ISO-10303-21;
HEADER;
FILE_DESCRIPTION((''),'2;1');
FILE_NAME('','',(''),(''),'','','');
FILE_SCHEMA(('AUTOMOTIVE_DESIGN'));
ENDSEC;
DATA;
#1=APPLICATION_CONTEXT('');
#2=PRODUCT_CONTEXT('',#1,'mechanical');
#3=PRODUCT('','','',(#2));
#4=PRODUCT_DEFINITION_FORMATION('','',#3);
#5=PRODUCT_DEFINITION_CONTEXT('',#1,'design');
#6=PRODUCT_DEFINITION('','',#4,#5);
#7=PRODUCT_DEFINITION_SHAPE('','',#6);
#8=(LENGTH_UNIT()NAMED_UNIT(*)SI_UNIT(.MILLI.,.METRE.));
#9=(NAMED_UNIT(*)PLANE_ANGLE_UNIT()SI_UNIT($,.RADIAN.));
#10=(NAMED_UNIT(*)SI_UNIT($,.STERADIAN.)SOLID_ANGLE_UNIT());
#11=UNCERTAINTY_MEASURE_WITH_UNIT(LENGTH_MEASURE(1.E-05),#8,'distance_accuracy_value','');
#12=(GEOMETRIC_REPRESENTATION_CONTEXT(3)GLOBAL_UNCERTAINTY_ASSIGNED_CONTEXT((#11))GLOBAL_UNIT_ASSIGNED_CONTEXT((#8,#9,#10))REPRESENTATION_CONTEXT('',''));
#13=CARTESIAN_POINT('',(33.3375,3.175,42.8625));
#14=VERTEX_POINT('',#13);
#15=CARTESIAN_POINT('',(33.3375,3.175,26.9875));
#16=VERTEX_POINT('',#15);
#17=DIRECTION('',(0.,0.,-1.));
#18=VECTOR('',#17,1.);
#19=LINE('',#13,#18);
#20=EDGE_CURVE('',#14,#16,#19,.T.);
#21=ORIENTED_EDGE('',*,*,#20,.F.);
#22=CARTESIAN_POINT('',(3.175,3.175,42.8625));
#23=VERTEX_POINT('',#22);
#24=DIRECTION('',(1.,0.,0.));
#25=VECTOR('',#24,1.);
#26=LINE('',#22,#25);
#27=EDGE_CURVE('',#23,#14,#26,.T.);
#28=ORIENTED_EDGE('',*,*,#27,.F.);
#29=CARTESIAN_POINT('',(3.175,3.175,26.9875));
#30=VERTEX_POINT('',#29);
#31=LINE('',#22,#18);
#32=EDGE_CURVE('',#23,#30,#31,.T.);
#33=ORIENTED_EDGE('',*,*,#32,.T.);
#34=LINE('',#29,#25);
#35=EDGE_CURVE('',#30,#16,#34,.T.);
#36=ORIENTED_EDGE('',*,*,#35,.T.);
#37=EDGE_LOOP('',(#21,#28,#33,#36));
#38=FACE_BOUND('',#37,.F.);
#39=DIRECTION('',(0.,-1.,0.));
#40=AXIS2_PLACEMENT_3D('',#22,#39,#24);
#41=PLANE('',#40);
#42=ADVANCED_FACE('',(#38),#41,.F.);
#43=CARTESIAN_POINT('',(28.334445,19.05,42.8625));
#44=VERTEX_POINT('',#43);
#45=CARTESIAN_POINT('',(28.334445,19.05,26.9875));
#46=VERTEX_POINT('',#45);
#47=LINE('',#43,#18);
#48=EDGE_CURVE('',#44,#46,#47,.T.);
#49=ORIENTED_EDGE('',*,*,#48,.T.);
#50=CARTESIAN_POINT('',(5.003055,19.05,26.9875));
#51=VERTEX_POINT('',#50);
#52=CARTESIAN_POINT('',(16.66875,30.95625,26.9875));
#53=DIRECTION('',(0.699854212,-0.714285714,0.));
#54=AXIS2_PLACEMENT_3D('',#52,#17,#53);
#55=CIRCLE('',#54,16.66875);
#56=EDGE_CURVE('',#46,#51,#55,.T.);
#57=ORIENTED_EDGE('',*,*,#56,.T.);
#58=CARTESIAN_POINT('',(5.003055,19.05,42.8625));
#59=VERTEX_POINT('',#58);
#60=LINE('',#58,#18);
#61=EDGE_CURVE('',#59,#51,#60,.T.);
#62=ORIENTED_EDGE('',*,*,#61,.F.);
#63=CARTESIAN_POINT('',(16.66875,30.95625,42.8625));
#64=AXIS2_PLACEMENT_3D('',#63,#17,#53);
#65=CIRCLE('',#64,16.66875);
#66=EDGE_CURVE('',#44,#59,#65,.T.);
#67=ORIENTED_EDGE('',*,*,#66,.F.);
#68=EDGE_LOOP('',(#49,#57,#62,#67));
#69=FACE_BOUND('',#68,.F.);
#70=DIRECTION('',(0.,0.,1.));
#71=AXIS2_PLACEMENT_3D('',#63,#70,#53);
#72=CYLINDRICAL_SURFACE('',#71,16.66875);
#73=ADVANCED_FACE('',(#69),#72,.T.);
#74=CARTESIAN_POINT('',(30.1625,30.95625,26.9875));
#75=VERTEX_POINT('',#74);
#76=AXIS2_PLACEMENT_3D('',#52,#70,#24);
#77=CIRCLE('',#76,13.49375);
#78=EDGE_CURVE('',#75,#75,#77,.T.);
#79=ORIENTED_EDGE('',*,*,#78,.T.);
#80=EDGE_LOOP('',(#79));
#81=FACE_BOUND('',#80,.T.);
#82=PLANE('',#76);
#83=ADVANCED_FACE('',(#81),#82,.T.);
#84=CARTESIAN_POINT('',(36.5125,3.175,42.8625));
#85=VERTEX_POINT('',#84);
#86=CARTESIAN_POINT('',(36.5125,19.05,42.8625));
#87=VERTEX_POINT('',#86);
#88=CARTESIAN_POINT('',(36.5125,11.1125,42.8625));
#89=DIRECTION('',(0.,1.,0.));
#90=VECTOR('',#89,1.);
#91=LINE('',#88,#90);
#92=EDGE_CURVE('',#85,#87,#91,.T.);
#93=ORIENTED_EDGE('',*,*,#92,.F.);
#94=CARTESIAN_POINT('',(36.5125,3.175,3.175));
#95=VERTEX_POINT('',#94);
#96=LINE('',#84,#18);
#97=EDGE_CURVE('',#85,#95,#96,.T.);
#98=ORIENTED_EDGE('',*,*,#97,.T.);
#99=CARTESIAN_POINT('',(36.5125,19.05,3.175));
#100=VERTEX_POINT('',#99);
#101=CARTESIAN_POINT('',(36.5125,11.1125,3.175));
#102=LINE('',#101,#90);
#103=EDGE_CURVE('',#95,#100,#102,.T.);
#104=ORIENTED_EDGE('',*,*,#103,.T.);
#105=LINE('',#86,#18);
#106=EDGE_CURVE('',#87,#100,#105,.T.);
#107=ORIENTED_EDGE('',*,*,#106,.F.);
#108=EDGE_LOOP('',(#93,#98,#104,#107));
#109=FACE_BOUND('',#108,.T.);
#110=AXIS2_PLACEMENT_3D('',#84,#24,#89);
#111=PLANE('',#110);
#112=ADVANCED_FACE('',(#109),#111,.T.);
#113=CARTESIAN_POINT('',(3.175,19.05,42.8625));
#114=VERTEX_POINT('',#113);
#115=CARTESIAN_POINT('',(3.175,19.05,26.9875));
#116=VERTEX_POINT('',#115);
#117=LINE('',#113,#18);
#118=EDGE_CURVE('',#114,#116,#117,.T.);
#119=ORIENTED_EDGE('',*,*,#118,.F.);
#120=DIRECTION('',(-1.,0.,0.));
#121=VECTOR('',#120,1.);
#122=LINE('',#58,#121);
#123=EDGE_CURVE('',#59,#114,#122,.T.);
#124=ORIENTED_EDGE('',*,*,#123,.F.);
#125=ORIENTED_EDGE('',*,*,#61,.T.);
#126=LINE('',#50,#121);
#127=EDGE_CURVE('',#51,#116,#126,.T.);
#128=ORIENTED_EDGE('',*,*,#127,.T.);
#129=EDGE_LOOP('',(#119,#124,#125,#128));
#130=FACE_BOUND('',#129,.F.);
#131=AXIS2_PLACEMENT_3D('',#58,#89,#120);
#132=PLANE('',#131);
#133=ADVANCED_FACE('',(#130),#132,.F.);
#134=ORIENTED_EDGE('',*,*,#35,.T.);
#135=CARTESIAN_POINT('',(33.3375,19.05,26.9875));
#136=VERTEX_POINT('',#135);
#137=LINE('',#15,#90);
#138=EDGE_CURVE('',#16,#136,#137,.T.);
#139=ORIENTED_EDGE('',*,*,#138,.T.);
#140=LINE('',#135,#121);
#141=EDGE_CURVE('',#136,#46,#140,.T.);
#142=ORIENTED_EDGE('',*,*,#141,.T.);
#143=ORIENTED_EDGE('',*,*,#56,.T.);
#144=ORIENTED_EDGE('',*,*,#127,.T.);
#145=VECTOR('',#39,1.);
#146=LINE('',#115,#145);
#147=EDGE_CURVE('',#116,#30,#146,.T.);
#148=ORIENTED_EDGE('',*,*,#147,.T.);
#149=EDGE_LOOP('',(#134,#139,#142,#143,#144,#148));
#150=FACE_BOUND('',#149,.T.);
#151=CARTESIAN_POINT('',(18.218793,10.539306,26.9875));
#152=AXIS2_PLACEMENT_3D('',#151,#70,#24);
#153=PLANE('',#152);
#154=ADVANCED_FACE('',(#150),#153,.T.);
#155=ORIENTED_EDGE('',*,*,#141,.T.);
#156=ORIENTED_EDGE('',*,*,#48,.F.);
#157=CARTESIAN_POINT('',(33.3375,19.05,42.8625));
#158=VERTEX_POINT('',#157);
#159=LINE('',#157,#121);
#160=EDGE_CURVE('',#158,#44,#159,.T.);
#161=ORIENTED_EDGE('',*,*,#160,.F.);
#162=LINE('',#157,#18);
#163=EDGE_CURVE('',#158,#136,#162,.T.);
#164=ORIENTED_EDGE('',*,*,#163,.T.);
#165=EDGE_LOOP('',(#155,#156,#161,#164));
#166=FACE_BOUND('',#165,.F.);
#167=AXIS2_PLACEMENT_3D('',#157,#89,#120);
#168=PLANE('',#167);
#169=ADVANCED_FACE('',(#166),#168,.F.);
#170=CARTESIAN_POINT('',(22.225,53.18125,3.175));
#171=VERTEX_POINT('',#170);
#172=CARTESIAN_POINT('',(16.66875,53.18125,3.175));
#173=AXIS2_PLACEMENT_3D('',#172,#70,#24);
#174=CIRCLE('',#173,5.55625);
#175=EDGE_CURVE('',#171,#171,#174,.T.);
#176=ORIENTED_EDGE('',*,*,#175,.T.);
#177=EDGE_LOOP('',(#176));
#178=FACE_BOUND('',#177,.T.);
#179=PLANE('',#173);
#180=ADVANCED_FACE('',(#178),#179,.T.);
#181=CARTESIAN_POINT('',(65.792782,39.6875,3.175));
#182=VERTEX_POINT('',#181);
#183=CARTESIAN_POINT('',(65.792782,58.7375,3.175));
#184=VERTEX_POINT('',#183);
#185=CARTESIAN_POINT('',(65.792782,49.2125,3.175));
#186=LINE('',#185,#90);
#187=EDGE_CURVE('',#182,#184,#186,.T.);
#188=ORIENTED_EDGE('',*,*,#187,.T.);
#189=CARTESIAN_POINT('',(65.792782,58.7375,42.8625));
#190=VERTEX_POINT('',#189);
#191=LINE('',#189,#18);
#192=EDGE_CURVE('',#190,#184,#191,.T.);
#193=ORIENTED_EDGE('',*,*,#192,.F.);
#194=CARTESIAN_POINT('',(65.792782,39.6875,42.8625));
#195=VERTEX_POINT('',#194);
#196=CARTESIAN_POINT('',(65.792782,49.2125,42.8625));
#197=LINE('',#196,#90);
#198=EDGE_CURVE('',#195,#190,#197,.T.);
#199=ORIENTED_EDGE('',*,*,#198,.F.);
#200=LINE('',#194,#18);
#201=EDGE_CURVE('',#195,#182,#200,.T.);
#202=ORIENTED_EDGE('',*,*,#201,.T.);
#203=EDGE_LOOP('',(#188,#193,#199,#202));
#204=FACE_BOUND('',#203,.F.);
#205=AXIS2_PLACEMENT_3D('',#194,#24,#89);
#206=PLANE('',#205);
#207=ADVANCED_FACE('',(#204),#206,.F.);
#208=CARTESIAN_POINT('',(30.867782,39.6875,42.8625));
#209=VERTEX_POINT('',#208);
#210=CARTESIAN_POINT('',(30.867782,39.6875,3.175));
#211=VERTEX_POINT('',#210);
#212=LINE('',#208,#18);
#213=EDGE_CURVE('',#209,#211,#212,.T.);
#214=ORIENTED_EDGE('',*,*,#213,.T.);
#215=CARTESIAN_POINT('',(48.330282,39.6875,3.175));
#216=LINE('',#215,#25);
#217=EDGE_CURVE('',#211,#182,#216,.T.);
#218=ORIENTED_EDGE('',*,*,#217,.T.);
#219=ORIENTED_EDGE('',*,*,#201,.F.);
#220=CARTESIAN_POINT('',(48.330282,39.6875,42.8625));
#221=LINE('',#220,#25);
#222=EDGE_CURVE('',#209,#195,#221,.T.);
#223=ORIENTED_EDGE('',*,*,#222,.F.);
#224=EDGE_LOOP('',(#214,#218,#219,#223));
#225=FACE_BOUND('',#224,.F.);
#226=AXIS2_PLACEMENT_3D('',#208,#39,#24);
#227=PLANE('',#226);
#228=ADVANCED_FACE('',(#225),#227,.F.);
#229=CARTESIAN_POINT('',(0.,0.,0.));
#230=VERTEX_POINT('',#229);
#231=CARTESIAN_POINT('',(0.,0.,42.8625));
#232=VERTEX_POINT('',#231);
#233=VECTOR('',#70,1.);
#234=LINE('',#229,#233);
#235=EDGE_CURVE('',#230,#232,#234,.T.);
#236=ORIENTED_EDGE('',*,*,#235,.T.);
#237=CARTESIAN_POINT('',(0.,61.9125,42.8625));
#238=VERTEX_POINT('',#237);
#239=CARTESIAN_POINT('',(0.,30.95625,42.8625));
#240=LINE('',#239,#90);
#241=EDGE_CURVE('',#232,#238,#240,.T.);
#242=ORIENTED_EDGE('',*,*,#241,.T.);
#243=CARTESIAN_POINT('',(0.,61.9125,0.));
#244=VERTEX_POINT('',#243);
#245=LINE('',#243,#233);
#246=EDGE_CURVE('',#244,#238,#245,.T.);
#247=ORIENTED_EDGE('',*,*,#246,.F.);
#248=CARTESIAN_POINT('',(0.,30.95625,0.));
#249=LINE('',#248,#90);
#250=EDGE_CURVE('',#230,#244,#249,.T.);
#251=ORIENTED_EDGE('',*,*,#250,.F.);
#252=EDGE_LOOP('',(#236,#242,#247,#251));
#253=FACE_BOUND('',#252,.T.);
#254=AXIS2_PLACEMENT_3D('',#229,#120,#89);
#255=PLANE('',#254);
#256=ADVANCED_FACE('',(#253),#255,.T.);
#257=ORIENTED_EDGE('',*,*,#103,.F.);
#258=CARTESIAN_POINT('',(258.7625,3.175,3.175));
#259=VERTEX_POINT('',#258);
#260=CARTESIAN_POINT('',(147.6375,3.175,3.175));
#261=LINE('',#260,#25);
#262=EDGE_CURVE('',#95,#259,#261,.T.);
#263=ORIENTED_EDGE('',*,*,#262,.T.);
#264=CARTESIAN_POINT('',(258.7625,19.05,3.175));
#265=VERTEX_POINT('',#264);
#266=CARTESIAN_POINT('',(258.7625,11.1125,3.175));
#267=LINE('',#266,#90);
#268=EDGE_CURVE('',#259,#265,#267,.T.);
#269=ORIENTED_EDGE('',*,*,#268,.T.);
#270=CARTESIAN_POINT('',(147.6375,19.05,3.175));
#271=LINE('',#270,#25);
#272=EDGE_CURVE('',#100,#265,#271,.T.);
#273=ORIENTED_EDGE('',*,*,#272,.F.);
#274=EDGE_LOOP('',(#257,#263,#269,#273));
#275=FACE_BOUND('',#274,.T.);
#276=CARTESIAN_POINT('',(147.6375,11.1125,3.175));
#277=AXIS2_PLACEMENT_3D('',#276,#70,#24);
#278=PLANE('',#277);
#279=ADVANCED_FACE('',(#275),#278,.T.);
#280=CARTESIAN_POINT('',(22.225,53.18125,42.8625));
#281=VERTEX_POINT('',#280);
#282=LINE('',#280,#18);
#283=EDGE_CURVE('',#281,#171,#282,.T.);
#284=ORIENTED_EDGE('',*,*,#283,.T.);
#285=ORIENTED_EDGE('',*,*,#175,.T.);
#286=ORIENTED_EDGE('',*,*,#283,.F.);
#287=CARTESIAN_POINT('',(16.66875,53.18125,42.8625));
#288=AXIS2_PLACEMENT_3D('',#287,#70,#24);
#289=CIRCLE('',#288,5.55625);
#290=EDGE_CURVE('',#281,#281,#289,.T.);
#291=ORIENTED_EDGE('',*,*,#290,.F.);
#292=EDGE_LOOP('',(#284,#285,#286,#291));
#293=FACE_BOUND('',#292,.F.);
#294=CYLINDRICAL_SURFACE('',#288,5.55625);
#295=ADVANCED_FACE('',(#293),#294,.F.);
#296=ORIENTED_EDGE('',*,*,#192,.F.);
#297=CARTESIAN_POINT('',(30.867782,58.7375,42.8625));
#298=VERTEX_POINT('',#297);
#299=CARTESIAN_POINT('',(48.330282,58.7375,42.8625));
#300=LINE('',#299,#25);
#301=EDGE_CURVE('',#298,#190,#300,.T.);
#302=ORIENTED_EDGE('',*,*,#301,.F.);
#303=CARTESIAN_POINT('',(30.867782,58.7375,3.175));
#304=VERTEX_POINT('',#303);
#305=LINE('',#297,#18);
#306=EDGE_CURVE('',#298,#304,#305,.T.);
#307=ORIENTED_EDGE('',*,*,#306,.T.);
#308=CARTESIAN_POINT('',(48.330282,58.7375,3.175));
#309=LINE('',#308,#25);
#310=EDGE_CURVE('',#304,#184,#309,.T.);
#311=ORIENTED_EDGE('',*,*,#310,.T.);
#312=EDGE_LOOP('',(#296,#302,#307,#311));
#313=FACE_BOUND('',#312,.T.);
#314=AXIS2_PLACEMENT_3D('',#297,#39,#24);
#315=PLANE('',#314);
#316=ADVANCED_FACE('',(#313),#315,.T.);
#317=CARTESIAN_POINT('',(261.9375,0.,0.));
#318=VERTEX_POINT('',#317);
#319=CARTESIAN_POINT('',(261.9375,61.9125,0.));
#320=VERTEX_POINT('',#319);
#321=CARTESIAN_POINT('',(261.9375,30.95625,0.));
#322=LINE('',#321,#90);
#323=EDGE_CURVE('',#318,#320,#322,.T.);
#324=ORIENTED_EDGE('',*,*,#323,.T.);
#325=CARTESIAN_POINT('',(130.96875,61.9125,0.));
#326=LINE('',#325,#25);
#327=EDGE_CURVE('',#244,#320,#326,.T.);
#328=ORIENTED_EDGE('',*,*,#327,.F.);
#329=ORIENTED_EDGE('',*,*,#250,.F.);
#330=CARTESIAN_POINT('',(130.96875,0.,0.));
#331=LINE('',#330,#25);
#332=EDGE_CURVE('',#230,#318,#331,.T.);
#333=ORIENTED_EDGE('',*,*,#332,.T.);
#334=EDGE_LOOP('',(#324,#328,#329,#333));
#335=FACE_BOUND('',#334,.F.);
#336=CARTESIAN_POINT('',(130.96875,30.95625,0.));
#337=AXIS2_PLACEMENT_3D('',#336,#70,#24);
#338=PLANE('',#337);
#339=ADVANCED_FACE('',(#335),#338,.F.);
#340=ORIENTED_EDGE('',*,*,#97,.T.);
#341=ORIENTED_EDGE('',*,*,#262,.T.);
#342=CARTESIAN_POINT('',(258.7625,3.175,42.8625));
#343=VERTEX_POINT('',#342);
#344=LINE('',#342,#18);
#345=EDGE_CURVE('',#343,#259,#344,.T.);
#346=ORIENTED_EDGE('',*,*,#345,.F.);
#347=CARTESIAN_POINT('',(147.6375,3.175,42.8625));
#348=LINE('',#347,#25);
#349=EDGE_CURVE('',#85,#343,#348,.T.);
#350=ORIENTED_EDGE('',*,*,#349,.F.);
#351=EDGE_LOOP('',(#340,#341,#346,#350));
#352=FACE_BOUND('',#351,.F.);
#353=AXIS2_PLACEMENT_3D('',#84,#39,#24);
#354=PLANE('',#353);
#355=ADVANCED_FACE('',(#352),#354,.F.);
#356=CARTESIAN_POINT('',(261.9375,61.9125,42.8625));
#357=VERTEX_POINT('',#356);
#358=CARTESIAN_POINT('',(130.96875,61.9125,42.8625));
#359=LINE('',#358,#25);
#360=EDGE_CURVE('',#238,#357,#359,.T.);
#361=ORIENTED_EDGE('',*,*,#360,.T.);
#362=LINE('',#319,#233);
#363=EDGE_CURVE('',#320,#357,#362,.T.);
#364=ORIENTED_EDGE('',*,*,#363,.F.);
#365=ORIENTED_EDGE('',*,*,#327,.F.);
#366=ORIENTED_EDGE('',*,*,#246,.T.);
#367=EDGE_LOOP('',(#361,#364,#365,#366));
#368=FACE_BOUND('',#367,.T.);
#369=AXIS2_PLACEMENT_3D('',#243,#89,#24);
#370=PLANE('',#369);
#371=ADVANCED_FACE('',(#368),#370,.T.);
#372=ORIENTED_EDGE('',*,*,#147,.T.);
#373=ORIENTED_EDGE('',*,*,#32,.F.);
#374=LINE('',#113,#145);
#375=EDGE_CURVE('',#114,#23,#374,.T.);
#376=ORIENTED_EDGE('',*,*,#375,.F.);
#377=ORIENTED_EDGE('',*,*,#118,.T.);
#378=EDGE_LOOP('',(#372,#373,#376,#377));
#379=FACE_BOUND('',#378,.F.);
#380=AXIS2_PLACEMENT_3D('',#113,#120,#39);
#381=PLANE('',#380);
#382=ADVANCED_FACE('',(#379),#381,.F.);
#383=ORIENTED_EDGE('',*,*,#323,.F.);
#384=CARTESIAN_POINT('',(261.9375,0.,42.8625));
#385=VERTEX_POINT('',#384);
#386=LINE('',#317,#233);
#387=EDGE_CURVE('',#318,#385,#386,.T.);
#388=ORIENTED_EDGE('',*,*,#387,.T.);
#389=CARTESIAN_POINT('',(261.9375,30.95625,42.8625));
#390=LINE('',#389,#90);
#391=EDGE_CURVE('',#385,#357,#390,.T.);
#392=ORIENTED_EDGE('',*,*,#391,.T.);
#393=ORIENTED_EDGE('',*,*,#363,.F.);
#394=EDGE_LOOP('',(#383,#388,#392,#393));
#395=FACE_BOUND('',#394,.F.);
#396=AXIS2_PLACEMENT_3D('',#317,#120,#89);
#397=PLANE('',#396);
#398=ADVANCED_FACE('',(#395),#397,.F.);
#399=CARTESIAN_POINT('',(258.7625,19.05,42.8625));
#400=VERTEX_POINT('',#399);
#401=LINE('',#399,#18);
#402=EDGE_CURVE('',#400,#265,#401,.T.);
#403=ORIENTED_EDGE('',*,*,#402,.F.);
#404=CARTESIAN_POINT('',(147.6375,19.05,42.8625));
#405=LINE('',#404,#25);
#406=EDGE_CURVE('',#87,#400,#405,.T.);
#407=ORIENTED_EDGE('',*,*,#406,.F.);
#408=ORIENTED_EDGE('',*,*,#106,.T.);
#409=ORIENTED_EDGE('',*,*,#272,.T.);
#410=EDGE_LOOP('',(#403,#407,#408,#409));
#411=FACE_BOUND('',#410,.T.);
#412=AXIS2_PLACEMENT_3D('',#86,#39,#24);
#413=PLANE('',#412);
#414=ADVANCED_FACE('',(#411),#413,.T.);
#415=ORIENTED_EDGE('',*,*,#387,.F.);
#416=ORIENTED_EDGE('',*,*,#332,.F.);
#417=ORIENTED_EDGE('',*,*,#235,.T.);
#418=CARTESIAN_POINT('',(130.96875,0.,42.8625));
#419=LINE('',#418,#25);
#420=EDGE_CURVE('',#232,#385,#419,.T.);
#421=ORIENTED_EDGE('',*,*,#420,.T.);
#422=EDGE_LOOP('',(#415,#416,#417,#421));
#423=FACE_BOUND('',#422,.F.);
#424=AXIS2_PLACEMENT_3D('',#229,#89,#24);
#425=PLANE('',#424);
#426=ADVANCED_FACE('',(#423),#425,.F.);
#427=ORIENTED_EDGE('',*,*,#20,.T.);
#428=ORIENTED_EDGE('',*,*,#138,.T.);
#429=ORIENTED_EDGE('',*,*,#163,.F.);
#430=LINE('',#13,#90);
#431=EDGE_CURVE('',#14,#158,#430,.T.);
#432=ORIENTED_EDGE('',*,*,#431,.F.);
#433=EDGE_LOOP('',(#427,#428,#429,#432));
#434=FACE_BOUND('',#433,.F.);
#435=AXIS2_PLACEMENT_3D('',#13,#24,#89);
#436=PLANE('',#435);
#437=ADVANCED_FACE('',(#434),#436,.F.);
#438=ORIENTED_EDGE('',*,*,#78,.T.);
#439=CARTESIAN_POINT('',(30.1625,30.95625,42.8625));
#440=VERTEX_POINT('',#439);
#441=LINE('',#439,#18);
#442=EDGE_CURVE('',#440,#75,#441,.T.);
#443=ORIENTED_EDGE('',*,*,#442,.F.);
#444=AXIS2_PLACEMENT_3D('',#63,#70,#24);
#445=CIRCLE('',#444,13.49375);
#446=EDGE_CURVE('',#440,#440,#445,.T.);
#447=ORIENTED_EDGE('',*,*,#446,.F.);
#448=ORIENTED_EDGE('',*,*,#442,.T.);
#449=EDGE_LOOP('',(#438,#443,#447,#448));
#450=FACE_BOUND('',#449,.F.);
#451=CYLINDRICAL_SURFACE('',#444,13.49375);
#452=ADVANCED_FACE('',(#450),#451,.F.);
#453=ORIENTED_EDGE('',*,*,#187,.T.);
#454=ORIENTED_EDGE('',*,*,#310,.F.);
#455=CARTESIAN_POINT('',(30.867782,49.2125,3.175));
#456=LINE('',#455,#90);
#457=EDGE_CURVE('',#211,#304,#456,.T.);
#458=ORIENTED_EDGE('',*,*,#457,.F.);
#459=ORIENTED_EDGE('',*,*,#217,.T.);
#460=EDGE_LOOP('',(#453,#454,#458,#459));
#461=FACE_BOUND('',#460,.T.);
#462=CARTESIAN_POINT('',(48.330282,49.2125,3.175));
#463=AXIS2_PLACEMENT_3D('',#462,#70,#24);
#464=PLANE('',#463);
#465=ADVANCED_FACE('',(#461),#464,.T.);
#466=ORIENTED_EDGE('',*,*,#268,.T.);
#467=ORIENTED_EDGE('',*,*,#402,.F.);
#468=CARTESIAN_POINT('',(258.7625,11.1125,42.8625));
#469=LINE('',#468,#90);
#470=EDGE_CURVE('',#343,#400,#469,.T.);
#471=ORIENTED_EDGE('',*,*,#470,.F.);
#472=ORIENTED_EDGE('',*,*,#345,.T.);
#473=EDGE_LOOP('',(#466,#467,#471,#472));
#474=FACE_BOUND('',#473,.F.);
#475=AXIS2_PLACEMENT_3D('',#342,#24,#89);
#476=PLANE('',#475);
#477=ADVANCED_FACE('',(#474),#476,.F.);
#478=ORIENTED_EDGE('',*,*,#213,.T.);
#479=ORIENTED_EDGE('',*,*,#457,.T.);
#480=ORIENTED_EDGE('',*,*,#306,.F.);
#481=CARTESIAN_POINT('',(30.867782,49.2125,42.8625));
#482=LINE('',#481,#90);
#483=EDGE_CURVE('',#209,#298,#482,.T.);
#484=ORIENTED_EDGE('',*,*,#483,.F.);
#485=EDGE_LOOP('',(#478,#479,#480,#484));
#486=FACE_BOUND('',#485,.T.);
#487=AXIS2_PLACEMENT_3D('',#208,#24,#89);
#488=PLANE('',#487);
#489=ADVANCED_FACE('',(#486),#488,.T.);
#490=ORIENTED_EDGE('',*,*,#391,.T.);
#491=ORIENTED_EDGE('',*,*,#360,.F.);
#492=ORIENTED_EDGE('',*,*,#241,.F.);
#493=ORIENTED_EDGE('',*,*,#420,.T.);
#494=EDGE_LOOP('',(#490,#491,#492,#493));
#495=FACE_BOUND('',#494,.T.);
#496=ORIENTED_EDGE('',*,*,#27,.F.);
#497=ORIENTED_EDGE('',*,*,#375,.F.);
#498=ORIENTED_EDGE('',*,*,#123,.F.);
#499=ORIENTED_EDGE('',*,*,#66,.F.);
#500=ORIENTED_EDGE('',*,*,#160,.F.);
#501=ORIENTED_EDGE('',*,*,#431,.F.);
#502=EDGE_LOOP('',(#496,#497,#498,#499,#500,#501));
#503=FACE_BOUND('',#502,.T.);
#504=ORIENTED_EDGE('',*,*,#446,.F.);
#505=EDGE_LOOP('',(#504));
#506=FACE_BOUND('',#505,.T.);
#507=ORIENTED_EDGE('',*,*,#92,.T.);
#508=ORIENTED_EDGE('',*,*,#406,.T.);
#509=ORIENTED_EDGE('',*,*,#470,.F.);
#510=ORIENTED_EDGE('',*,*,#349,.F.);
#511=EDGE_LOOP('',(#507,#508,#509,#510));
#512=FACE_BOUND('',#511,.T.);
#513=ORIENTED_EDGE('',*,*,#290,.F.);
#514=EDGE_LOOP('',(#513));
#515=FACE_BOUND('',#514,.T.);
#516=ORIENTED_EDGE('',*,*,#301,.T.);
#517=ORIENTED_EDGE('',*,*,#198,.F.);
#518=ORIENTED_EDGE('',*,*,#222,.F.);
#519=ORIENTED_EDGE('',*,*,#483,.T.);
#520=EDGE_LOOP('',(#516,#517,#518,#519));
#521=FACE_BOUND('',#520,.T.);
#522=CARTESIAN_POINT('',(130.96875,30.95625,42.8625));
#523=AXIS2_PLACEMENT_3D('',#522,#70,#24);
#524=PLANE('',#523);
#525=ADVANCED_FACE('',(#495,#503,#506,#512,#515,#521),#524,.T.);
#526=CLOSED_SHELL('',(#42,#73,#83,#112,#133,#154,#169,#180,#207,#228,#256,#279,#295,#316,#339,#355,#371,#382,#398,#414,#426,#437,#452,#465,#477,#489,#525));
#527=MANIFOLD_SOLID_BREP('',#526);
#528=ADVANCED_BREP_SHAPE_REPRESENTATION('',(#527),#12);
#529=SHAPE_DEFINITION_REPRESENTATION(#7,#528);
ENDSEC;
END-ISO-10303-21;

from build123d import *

# Parameters (mm, degrees)
F0_W     = 261.9375
F0_H     = 61.9125
F1_DEPTH = 42.8625
F2_R     = 5.55625
F2_W     = 34.925
F2_H     = 19.05
F2_W_2   = 222.25
F2_H_2   = 15.875
F3_DEPTH = 39.6875
F4_R     = 13.49375
F5_DEPTH = 15.875


# Not quite as in the source:
# - a feature of the source that left no trace in its solid (it failed there, or was rolled back) is left out


with BuildPart() as f1:
    # F0 (on Top) → F1 (new body)
    with BuildSketch(Plane.XY):
        with Locations((130.96875, 30.95625)):
            Rectangle(F0_W, F0_H)
    extrude(amount=F1_DEPTH)

    # F2 (on face) → F3 (cut, through all)
    with BuildSketch(Plane.XY.offset(42.8625)):
        with Locations((16.66875, 53.18125)):
            Circle(F2_R)
        with Locations((48.3302816571, 49.2125)):
            Rectangle(F2_W, F2_H)
        with Locations((147.6375, 11.1125)):
            Rectangle(F2_W_2, F2_H_2)
    extrude(amount=-F3_DEPTH, mode=Mode.SUBTRACT)

    # F4 (on face) → F5 (cut)
    with BuildSketch(Plane.XY.offset(42.8625)):
        with Locations((16.66875, 30.95625)):
            Circle(F4_R)
        with BuildLine():
            Line((3.175, 19.05), (3.175, 3.175))
            Line((3.175, 3.175), (33.3375, 3.175))
            Line((33.3375, 3.175), (33.3375, 19.05))
            Line((33.3375, 19.05), (28.3344449, 19.05))
            ThreePointArc((28.3344449, 19.05), (16.66875, 14.2875), (5.0030551, 19.05))
            Line((5.0030551, 19.05), (3.175, 19.05))
        make_face()
    extrude(amount=-F5_DEPTH, mode=Mode.SUBTRACT)


solid = f1.part
